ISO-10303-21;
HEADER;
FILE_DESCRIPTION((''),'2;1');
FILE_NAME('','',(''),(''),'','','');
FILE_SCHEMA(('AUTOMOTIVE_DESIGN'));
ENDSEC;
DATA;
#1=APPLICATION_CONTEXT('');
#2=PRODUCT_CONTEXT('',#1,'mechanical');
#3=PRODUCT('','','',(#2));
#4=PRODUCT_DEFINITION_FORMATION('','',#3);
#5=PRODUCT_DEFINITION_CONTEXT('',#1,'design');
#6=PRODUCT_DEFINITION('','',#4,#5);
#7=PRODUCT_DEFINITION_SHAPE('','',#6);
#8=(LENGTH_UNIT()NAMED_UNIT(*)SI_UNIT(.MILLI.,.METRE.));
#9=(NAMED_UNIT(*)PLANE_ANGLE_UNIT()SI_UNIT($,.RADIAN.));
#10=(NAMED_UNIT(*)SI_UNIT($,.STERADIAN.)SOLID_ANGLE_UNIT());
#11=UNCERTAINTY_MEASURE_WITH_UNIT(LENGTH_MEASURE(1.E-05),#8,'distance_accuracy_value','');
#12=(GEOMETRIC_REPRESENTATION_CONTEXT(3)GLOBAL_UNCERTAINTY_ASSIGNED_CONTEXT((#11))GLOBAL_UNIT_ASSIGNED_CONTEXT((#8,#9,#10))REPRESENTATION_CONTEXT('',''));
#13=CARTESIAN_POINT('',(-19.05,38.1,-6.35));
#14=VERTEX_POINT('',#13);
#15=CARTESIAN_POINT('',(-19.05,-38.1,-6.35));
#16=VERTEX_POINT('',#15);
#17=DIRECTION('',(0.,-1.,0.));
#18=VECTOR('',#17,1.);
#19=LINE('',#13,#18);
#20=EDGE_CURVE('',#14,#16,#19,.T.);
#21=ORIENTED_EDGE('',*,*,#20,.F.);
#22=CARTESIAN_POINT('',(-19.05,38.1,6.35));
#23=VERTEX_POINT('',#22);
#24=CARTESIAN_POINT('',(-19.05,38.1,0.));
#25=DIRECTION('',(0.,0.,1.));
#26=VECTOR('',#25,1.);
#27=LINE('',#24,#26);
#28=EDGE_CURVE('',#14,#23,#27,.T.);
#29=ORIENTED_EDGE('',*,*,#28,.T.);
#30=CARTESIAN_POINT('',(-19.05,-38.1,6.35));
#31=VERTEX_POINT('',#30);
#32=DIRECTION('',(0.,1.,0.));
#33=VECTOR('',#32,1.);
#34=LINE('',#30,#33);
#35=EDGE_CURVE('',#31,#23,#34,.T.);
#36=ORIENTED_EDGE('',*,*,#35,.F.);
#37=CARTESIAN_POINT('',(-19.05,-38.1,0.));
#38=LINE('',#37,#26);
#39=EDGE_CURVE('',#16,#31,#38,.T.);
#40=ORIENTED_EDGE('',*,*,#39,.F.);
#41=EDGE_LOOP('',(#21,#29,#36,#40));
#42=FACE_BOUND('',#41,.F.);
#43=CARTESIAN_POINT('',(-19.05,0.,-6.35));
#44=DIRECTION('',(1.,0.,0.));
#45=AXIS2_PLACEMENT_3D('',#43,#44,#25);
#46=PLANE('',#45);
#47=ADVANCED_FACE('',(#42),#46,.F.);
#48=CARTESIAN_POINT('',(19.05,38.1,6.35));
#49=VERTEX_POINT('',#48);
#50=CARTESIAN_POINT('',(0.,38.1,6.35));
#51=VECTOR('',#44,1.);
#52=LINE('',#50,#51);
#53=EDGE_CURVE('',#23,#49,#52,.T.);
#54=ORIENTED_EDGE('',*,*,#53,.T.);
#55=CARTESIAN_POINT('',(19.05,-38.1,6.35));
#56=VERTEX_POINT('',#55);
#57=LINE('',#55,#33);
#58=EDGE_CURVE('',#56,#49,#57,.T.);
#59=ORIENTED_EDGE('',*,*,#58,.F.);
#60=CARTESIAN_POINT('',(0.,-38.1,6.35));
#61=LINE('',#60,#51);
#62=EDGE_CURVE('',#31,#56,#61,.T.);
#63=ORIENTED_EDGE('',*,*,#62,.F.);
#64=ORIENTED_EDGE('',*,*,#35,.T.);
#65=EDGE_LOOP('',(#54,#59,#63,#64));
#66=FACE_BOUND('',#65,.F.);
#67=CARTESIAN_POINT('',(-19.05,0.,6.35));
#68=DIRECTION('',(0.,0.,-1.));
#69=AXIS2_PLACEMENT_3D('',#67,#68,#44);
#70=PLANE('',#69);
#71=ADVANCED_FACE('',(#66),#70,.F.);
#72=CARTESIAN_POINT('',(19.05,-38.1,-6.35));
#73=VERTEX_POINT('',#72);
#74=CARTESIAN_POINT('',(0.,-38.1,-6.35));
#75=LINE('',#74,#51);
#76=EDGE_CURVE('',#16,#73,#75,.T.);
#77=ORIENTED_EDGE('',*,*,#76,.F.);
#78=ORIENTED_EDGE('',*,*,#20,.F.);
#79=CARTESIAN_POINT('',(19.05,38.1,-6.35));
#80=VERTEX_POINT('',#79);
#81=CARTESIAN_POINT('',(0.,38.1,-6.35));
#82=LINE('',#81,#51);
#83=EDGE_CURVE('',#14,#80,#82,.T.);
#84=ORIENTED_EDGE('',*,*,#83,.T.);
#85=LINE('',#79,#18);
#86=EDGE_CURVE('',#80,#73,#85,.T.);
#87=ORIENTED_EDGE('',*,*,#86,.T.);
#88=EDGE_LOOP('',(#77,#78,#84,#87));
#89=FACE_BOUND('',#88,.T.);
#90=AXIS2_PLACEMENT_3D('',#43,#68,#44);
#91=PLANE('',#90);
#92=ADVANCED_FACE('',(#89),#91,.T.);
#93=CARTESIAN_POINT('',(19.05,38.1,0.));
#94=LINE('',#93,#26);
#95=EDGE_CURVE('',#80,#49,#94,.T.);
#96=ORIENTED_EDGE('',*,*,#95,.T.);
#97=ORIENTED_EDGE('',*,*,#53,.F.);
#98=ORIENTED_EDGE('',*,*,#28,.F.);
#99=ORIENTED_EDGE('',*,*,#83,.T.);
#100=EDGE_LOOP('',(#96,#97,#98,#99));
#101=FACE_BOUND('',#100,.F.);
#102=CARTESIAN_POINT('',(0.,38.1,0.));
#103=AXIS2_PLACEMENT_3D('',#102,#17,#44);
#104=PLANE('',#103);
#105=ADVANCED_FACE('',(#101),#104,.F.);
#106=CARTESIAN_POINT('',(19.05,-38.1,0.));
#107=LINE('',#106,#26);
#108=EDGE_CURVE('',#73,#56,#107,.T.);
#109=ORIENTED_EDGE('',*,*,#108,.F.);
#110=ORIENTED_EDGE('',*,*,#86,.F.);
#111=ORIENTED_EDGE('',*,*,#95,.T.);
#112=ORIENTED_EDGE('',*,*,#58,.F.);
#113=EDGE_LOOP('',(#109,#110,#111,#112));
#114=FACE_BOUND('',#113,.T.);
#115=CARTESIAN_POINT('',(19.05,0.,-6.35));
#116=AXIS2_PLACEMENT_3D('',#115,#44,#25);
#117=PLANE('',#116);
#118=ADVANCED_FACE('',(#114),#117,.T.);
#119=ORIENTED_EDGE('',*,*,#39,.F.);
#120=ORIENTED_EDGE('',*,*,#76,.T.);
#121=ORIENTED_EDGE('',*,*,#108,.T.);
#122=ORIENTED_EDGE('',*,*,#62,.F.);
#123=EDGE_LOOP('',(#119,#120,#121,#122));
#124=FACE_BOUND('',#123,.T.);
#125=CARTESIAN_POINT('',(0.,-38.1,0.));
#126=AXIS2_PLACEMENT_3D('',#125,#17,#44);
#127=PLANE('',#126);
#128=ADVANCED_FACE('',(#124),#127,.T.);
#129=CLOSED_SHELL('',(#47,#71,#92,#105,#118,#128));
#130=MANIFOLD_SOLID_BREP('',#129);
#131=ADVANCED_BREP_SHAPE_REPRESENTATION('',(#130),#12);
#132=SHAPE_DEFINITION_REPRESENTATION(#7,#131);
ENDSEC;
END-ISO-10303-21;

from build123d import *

# Parameters (mm, degrees)
F0_W     = 38.1
F0_H     = 12.7
F2_DEPTH = 38.1


# Not quite as in the source:
# - the program builds the solid bodies; features that only make, move or delete a surface that nothing else refers to are left out


with BuildPart() as f2:
    # F0 (on Front) → F2 (new body, symmetric)
    with BuildSketch(Plane.XZ):
        Rectangle(F0_W, F0_H)
    extrude(amount=F2_DEPTH, both=True)


solid = f2.part
